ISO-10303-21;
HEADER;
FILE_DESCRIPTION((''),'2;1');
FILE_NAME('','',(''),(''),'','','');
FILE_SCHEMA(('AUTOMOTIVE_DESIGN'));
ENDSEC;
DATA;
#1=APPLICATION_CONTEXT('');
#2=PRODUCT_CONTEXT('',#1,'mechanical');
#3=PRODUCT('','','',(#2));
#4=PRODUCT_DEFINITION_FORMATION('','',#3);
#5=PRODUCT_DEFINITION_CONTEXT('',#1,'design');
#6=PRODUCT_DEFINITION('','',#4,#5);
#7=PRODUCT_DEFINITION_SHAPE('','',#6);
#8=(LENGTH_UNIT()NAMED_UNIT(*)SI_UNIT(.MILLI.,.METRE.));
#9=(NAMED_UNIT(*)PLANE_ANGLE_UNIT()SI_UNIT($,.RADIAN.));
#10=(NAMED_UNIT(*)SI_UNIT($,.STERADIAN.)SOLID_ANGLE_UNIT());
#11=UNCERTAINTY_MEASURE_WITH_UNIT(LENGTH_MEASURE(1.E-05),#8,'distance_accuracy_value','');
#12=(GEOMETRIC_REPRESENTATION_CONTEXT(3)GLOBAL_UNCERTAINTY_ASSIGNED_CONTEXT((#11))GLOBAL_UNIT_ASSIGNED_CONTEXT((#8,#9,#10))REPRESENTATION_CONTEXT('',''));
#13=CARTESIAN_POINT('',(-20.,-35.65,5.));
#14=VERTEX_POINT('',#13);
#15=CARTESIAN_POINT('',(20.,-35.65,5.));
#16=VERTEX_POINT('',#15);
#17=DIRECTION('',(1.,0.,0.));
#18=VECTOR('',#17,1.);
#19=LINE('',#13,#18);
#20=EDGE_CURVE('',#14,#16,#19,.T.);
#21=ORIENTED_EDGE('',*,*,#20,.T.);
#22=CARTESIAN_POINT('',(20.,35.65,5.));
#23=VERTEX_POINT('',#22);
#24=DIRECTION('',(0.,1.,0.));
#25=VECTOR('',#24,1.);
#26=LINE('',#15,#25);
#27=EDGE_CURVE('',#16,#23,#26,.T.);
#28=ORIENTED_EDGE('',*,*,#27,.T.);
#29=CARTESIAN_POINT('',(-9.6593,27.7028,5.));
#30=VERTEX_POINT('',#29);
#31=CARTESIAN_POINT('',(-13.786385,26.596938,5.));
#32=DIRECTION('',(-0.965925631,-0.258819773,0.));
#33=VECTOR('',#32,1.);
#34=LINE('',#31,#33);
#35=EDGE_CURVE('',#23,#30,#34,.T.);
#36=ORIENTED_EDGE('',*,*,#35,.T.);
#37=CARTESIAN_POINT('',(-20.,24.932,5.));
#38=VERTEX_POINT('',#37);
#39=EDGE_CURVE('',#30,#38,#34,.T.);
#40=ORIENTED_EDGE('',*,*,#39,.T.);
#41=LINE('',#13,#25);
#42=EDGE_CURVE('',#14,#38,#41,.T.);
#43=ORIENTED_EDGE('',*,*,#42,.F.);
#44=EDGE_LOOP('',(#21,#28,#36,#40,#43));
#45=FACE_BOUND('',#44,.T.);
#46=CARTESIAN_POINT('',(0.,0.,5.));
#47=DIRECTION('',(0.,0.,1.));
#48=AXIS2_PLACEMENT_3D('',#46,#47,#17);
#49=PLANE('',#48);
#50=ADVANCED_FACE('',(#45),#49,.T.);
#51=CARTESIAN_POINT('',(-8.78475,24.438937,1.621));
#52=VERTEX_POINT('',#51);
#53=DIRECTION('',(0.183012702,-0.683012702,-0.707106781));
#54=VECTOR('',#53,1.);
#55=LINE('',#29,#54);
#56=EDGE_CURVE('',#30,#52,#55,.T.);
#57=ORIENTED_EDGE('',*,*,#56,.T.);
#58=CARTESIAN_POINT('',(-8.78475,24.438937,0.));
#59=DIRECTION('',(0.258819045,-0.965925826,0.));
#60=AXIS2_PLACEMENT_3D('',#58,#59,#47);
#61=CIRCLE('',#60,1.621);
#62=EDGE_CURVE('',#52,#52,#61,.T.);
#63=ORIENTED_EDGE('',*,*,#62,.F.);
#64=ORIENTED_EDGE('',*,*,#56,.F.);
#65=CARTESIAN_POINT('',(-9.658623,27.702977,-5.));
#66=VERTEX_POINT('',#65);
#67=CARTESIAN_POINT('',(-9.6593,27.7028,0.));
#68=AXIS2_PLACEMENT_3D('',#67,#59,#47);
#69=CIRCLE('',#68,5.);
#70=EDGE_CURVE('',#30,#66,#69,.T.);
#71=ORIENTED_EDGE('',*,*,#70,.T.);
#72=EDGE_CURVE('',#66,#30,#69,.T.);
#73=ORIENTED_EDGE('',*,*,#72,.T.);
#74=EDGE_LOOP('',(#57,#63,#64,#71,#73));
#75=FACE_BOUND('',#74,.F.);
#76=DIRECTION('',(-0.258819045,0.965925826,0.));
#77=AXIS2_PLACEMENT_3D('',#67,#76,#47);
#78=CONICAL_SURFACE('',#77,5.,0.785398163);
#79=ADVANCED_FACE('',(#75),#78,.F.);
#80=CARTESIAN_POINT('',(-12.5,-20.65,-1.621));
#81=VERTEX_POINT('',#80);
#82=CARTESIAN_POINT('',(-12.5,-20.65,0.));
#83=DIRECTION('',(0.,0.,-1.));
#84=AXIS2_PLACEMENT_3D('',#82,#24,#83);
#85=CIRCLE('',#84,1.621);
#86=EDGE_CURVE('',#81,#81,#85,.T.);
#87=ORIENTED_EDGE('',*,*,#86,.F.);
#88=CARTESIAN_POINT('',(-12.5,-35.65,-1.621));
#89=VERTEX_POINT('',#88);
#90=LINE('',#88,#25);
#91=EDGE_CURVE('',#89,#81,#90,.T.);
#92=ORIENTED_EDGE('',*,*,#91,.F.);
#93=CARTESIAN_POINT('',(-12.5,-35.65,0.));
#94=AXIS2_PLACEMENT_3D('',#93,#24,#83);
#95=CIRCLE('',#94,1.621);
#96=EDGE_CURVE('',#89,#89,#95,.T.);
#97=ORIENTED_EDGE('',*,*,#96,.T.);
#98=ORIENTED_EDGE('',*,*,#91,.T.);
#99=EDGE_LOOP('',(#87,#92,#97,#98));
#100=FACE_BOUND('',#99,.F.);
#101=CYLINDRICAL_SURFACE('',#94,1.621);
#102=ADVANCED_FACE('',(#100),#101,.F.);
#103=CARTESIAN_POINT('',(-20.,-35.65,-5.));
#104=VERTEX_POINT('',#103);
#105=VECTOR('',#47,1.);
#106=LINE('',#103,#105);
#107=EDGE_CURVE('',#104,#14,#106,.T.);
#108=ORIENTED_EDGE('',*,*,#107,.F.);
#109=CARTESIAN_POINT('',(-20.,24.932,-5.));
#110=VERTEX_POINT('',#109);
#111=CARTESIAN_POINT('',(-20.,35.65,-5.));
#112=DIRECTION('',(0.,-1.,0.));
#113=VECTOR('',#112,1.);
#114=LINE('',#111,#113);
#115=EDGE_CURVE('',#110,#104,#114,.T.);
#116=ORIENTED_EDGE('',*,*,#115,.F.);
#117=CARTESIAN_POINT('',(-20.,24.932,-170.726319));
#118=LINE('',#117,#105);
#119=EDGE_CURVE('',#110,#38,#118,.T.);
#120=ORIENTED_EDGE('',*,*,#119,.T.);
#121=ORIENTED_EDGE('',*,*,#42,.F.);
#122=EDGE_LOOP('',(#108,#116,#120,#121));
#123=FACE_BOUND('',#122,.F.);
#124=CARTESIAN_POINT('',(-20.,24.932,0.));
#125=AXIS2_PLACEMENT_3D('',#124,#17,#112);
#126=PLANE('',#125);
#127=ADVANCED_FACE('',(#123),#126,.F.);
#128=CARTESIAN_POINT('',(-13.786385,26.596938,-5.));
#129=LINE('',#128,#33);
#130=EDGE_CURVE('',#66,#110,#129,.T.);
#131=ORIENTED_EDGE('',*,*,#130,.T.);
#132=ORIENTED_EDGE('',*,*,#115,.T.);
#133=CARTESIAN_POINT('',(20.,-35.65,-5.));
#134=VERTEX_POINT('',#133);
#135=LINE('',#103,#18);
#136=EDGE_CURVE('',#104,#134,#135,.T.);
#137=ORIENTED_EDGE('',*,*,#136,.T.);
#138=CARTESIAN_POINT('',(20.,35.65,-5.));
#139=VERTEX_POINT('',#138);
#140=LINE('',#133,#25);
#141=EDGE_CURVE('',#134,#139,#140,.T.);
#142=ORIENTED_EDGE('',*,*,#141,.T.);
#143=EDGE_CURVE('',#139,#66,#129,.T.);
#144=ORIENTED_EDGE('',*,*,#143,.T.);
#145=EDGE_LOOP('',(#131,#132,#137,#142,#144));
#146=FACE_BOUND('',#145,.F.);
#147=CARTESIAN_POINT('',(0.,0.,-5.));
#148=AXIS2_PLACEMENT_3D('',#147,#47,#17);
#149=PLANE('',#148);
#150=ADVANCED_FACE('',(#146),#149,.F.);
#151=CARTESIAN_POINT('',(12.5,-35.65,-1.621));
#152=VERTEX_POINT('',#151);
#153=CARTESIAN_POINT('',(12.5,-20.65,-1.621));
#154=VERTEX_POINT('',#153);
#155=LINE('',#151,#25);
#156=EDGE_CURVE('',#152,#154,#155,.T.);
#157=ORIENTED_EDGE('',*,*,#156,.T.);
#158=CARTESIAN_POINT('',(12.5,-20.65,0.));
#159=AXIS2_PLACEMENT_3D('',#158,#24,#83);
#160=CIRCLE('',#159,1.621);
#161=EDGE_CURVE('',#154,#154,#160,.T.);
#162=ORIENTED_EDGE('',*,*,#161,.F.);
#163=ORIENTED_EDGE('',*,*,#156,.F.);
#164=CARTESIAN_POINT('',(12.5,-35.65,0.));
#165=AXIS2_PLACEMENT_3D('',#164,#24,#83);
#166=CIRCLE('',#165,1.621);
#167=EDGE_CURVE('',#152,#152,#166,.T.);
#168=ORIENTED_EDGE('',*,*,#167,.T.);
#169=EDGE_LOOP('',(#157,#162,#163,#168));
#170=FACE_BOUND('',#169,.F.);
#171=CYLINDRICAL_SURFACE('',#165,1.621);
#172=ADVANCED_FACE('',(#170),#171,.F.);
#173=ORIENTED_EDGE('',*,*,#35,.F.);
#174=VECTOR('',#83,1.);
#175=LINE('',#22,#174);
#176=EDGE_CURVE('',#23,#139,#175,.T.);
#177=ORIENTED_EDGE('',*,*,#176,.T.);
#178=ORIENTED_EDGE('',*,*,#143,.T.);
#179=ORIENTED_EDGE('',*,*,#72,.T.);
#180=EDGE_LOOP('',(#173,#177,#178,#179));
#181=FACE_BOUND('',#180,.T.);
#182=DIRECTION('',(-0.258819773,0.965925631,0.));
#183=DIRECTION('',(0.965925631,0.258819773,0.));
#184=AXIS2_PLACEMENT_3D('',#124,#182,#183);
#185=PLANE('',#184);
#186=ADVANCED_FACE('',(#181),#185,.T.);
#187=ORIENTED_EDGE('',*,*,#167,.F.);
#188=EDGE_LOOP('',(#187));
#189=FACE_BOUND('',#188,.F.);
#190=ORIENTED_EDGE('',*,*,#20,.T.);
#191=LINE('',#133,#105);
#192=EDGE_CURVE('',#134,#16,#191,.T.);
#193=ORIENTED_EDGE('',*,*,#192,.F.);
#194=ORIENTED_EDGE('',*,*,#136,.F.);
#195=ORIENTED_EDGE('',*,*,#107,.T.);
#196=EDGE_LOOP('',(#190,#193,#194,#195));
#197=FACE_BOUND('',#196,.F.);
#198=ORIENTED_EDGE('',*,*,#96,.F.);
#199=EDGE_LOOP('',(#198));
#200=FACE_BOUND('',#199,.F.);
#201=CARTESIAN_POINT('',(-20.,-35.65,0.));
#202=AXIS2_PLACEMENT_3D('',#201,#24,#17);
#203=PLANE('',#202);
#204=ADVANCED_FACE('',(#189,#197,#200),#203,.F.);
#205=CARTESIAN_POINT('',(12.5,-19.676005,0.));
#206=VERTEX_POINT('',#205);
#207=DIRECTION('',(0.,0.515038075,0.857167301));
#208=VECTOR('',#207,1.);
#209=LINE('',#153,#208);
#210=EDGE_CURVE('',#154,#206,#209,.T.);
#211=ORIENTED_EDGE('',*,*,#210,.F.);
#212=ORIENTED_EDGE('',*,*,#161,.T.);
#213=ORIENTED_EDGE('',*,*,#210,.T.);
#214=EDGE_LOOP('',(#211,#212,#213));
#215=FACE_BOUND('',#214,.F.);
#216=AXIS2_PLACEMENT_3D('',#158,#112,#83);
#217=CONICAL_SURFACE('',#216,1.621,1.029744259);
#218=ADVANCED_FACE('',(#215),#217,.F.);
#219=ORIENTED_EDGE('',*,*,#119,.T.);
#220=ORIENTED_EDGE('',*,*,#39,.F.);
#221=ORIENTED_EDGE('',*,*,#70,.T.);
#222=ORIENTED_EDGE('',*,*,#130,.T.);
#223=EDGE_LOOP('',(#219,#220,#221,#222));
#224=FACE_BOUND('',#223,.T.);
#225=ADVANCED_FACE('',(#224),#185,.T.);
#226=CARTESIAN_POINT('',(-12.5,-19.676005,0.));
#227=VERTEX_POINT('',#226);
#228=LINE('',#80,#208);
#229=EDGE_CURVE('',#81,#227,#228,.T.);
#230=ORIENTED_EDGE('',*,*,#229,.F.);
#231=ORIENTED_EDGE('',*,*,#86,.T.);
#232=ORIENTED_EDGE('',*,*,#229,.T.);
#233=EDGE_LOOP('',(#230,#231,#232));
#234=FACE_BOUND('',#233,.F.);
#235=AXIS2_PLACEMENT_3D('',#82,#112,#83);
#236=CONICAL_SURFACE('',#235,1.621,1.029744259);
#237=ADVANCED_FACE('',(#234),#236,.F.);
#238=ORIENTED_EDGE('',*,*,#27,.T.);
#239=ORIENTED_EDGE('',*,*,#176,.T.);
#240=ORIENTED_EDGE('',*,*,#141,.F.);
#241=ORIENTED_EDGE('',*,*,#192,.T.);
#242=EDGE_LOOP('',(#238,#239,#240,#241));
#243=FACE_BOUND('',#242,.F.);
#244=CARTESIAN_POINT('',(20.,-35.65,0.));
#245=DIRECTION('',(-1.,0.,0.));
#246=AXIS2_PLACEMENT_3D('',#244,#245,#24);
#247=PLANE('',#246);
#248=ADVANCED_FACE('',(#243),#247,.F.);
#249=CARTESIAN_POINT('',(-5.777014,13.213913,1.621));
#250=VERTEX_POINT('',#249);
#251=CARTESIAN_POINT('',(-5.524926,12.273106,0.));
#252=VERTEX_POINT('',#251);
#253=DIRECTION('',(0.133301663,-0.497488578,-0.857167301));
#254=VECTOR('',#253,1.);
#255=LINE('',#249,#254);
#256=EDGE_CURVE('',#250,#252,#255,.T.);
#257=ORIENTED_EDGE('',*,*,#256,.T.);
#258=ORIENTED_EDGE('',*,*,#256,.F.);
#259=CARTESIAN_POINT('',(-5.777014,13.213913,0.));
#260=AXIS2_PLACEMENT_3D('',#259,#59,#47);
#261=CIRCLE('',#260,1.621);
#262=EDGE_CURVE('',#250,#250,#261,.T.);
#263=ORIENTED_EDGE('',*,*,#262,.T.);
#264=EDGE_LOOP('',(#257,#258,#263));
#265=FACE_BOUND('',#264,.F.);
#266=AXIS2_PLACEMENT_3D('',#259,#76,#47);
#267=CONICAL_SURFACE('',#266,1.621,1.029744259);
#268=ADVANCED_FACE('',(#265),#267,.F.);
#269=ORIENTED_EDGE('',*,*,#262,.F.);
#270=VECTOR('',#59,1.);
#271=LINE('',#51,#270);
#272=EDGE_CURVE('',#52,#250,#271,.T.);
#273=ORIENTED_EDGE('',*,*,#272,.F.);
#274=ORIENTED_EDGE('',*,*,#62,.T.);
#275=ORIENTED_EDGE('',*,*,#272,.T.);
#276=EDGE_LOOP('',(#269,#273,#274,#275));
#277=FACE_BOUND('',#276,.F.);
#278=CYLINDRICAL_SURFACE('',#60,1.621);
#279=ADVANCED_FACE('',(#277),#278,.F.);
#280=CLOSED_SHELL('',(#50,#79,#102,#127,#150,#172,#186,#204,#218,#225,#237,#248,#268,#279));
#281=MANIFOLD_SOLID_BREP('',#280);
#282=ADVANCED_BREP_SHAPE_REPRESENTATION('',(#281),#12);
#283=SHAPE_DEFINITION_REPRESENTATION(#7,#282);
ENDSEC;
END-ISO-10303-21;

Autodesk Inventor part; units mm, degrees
ref_plane "YZ Plane" through (0, 0, 0) normal (1, 0, 0) x (0, 1, 0)
ref_plane "XZ Plane" through (0, 0, 0) normal (0, 1, 0) x (-1, 0, 0)
ref_plane "XY Plane" through (0, 0, 0) normal (0, 0, 1) x (1, 0, 0)
sketch "Esboço1" plane through (0, 0, 0) normal (0, 0, 1) x (1, 0, 0)
  line L0 (-20, -35.65) -> (20, -35.65)
  line L1 (20, -35.65) -> (20, 35.65)
  line L2 (20, 35.65) -> (-20, 35.65)
  line L3 (-20, 35.65) -> (-20, -35.65)
  line L4 (-20, 35.65) -> (20, 35.65)
  circle A0 centre (0, 25.65) radius 5 construction
  circle A1 centre (0, 25.65) radius 28 construction
  circle A2 centre (0, 25.65) radius 74 construction
  line L5 (-20, 6.0541) -> (20, 6.0541) construction
  line L6 (-20, -48.35) -> (20, -48.35) construction
  line L7 (-103.6, 0) -> (103.6, 0) construction
  line L8 (0, -77.95) -> (0, 129.25) construction
  line L9 (-20, 24.932) -> (20, 35.65)
  point P0 (0, 0)
  dimension "d0" = 71.3
  dimension "d1" = 40
  dimension "d41" = 10
  dimension "d42" = 61.3
  dimension "d43" = 56
  dimension "d45" = 84
  dimension "d49" = 15
  dimension "d58" = 10
extrude "Extrusão1" add sketch "Esboço1" along normal mid plane 10
extrude "Extrusão4" cut sketch "Esboço1" along normal through all both and the other way through all contours L3 L2 L9
sketch "Esboço2" plane through (-20, -35.65, -5) normal (0, -1, 0) x (1, 0, 0)
  line L0 (40, 10) -> (40, 0)
  line L1 (40, 5) -> (0, 5) construction
  line L2 (0, 0) -> (0, 10)
  line L3 (0, 0) -> (0, 10) projected
  line L4 (40, 0) -> (40, 10) projected
  line L5 (0, 10) -> (40, 10) construction
  line L6 (20, 10) -> (20, 0) construction
  line L7 (40, 0) -> (0, 0) construction
  point P0 (20, 5)
  point P1 (7.5, 5)
  point P2 (32.5, 5)
  dimension "d9" = 7.5
  dimension "d10" = 7.5
  dimension "d37" = 25
hole "Furo1" at (-12.5, -35.65, 0) at (12.5, -35.65, 0) direction (0, 1, 0) diameter 3.242 depth 15 tip angle 118 thread size "M4x0.7" class "6H" standard "ISO Metric profile"
sketch "Esboço3" plane through (0, 0, 5) normal (0, 0, 1) x (1, 0, 0)
  point P0 (0, 0)
  point P1 (0, 37.5)
  point P2 (0, 25.65)
hole "Furo2" [suppressed]
sketch "Esboço6" plane through (20, 35.65, 5) normal (-0.258819, 0.9659258, 0) x (0.9659258, 0.258819, 0)
  line L0 (0, 0) -> (0, 10) construction
  line L1 (0, 5) -> (-41.411, 5) construction
  line L2 (-41.411, 0) -> (-41.411, 10) construction
  line L3 (-20.7055, 5) -> (-20.7055, 0) construction
  point P0 (-28.5454, 5)
  point P1 (-30.7055, 5)
  point P2 (-10.7055, 5)
  dimension "d50" = 20
hole "Furo3" at (-9.6593, 27.7028, 0) direction (0.258819, -0.9659258, 0) diameter 3.242 depth 15 tip angle 118 countersink diameter 10 countersink angle 90 thread size "M4x0.7" class "6H" standard "ISO Metric profile"
properties part number "GRJ-03-115" material "Fenolite OR"
